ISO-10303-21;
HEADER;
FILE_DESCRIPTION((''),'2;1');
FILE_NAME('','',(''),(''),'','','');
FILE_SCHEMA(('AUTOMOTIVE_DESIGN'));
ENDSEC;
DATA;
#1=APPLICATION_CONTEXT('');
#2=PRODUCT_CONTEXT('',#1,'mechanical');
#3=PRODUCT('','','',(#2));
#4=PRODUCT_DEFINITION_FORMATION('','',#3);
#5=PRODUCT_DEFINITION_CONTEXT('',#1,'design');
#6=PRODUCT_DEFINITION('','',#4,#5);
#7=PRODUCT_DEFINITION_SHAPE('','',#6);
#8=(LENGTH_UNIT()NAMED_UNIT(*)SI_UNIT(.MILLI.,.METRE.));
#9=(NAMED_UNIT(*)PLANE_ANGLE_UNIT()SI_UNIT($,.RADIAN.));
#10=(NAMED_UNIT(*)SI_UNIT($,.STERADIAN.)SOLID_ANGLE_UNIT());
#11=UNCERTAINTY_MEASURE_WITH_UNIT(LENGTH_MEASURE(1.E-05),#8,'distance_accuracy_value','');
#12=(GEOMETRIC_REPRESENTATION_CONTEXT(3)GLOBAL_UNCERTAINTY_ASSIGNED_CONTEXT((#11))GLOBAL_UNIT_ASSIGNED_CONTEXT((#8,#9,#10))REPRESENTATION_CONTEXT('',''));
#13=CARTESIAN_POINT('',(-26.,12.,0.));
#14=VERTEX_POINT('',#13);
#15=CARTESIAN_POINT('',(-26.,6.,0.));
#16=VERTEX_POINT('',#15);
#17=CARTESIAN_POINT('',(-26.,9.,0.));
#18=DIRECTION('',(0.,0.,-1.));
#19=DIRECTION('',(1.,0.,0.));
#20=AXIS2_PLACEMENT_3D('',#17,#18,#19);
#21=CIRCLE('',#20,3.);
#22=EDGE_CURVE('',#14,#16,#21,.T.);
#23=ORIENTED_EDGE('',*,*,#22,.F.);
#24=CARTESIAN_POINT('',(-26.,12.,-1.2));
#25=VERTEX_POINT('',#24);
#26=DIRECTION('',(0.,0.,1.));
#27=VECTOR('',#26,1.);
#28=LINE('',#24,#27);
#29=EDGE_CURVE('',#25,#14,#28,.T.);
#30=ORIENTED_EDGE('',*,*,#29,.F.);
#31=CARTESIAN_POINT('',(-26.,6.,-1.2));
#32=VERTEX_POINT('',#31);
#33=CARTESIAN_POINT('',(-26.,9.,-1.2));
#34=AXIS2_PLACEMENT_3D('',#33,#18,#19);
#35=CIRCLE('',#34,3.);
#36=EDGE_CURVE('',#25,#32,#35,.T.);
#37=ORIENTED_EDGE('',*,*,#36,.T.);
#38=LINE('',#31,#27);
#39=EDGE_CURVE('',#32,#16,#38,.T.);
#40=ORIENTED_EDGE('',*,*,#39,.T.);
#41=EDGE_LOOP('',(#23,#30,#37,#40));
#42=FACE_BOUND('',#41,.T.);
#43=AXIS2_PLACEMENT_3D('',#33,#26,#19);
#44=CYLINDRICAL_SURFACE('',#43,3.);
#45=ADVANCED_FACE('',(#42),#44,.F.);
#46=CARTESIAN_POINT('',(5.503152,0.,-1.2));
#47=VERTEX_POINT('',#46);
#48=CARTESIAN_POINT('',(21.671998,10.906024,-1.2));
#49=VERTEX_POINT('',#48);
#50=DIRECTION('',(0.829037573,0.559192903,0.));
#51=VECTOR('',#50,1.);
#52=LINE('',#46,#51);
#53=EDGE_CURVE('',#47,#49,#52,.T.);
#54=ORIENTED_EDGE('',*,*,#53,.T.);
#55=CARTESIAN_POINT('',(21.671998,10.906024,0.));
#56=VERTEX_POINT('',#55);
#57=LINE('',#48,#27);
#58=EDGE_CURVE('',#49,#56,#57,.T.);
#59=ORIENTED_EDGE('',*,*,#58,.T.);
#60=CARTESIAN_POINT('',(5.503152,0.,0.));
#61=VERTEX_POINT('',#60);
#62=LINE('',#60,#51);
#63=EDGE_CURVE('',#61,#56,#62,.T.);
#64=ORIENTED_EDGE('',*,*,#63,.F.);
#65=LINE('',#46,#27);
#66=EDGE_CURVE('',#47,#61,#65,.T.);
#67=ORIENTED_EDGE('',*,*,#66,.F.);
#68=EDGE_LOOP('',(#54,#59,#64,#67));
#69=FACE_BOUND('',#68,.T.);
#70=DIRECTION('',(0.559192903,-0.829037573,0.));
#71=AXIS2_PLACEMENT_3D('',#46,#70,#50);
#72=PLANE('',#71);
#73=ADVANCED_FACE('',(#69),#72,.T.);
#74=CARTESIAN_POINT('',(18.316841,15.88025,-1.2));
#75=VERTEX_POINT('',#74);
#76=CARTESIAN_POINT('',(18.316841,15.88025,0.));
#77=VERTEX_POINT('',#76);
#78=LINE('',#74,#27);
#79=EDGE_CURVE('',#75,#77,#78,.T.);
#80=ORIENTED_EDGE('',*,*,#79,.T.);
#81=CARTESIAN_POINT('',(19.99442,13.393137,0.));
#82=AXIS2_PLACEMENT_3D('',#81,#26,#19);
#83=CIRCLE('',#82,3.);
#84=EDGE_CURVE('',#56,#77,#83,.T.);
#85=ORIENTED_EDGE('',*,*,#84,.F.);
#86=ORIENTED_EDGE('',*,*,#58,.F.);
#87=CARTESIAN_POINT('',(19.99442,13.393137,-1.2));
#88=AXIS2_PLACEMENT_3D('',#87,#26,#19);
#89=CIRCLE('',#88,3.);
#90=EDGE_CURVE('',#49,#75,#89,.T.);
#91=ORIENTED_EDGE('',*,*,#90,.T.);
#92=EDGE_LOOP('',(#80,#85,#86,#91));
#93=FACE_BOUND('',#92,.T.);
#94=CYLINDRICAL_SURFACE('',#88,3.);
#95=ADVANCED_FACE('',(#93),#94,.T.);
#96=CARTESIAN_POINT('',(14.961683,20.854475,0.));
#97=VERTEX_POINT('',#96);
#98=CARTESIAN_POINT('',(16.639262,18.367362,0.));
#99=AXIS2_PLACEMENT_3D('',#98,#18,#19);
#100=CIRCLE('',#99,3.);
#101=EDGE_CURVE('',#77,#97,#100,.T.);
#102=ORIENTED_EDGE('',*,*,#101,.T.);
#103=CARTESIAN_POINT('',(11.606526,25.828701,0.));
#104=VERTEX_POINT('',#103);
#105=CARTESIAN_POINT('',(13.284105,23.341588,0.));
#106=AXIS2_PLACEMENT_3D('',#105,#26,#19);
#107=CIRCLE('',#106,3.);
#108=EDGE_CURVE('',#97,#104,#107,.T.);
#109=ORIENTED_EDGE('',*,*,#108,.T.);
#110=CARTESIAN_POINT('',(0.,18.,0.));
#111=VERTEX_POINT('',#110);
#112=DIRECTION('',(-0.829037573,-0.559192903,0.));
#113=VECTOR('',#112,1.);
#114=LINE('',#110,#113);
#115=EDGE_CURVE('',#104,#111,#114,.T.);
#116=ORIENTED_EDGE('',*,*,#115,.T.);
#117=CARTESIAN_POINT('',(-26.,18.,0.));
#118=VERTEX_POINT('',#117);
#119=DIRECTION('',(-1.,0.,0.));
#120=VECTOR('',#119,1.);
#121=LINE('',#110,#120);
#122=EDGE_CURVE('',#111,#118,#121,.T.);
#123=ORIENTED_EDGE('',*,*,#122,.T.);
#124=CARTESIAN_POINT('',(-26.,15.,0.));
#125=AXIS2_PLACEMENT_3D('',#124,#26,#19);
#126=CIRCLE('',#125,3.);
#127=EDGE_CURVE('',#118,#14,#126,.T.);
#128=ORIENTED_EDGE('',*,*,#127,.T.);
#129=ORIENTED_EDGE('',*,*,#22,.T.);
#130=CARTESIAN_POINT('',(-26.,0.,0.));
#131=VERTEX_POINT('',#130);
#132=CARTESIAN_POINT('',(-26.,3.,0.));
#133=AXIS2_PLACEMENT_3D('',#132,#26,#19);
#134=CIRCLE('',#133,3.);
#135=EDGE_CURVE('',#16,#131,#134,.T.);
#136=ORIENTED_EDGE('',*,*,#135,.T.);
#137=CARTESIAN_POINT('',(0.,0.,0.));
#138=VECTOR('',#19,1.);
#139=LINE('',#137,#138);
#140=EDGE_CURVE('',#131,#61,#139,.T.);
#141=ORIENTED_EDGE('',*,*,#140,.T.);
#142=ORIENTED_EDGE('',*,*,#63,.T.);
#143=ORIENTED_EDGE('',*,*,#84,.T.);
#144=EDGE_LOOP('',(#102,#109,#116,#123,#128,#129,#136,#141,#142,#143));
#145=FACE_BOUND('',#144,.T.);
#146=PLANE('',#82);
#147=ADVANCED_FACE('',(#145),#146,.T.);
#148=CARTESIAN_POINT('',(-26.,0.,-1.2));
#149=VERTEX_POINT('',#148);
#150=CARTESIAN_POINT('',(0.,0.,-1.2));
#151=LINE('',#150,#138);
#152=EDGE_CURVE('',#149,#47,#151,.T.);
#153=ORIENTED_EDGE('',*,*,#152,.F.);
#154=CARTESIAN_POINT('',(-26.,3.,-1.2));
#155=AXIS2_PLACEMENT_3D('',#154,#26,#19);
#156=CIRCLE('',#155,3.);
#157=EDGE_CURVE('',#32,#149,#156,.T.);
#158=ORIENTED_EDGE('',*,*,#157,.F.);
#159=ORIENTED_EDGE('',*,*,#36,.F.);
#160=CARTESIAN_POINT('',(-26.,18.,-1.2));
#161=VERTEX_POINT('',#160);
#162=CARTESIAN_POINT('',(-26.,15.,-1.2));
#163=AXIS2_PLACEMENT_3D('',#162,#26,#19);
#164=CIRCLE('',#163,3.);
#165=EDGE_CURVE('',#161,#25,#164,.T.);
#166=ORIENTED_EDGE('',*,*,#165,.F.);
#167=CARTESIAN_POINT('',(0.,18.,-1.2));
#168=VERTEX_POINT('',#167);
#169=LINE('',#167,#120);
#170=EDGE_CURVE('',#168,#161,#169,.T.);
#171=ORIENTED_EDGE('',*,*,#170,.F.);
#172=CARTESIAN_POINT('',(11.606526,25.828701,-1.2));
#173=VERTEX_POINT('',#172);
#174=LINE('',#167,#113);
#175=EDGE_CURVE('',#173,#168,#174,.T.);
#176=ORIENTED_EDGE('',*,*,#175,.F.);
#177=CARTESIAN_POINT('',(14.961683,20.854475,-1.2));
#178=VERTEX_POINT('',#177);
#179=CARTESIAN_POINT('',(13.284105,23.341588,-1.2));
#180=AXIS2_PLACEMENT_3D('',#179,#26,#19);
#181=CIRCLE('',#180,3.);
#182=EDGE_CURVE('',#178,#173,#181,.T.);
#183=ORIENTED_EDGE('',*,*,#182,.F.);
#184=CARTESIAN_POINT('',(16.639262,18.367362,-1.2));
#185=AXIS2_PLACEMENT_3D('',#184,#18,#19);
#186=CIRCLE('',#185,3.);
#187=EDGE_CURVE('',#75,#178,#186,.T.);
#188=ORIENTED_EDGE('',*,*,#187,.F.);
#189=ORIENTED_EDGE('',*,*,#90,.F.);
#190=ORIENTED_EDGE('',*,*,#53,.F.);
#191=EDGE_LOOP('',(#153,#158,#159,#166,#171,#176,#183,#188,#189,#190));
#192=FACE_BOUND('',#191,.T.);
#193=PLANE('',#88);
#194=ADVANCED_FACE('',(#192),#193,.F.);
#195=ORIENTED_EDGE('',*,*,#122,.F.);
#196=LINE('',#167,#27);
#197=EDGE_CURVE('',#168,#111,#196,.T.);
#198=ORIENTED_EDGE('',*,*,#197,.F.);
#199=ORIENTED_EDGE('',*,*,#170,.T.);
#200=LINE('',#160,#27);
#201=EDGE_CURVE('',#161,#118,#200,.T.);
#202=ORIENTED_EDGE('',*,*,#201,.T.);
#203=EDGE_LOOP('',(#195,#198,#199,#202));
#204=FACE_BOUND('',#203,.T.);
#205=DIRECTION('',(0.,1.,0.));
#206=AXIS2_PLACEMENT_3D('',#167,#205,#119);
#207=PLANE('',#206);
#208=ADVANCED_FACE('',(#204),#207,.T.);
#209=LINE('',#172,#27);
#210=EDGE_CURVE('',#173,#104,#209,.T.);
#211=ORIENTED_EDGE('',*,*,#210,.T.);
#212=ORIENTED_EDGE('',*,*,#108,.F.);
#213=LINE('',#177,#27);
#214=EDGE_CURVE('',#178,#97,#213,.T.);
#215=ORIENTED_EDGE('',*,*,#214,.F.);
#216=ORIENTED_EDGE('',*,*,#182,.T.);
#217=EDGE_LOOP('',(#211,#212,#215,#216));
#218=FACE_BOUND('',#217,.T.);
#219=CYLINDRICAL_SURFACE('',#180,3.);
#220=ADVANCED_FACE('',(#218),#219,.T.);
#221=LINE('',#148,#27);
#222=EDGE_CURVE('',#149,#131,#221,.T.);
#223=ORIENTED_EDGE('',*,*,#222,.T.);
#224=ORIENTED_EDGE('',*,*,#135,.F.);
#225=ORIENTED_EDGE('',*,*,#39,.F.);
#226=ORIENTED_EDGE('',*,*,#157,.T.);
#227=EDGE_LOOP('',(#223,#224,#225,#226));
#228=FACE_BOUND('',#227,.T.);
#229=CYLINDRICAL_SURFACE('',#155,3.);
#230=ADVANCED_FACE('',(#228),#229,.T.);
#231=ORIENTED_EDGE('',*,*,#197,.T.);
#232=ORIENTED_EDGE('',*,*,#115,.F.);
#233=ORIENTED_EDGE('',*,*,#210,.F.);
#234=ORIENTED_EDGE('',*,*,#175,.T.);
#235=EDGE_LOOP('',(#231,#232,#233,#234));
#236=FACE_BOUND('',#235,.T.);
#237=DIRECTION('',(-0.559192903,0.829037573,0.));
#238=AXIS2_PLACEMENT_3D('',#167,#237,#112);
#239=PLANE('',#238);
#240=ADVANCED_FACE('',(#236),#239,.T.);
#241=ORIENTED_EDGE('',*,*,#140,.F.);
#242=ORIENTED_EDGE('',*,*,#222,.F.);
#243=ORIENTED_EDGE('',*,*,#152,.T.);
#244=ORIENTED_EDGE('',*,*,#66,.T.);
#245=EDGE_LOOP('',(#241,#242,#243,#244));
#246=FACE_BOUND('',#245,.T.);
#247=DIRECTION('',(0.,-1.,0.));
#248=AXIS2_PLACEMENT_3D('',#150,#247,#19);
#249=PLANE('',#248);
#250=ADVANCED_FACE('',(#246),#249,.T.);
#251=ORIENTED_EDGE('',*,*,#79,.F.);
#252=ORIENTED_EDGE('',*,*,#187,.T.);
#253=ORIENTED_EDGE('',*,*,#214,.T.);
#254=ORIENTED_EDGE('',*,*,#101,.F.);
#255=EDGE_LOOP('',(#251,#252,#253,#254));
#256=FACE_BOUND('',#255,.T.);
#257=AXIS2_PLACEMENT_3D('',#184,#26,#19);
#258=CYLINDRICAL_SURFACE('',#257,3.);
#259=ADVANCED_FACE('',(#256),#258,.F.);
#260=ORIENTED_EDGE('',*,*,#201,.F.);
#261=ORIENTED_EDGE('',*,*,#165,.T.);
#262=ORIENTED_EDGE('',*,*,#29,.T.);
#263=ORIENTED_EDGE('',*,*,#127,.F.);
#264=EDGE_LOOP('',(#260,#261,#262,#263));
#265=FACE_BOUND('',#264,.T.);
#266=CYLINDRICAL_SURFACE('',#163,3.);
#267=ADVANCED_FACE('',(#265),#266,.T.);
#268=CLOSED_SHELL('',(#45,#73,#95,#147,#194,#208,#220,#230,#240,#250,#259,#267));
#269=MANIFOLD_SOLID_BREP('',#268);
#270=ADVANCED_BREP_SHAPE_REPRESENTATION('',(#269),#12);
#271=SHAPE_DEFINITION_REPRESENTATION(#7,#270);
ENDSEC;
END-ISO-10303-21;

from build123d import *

# Parameters (mm, degrees)
SM_BASE_FLANGE_1_DEPTH = 1.2


# Sheet-metal steps are written as plain solids
with BuildPart() as part:
    # Sketch 1 → 基体-法兰1 (new body)
    with BuildSketch(Plane.XY):
        with BuildLine():
            Line((0, 0), (-26, 0))
            ThreePointArc((-26, 0), (-29, 3), (-26, 6))
            ThreePointArc((-26, 6), (-23, 9), (-26, 12))
            ThreePointArc((-26, 12), (-29, 15), (-26, 18))
            Line((-26, 18), (0, 18))
            Line((0, 18), (11.606526016, 25.828700649))
            ThreePointArc((11.606526016, 25.828700649), (15.771217444, 25.019166641), (14.961683437, 20.854475213))
            ThreePointArc((14.961683437, 20.854475213), (14.152149429, 16.689783785), (18.316840857, 15.880249778))
            ThreePointArc((18.316840857, 15.880249778), (22.481532285, 15.070715771), (21.671998278, 10.906024343))
            Line((21.671998278, 10.906024343), (5.503152266, 0))
            Line((5.503152266, 0), (0, 0))
        make_face()
    extrude(amount=-SM_BASE_FLANGE_1_DEPTH)


solid = part.part
